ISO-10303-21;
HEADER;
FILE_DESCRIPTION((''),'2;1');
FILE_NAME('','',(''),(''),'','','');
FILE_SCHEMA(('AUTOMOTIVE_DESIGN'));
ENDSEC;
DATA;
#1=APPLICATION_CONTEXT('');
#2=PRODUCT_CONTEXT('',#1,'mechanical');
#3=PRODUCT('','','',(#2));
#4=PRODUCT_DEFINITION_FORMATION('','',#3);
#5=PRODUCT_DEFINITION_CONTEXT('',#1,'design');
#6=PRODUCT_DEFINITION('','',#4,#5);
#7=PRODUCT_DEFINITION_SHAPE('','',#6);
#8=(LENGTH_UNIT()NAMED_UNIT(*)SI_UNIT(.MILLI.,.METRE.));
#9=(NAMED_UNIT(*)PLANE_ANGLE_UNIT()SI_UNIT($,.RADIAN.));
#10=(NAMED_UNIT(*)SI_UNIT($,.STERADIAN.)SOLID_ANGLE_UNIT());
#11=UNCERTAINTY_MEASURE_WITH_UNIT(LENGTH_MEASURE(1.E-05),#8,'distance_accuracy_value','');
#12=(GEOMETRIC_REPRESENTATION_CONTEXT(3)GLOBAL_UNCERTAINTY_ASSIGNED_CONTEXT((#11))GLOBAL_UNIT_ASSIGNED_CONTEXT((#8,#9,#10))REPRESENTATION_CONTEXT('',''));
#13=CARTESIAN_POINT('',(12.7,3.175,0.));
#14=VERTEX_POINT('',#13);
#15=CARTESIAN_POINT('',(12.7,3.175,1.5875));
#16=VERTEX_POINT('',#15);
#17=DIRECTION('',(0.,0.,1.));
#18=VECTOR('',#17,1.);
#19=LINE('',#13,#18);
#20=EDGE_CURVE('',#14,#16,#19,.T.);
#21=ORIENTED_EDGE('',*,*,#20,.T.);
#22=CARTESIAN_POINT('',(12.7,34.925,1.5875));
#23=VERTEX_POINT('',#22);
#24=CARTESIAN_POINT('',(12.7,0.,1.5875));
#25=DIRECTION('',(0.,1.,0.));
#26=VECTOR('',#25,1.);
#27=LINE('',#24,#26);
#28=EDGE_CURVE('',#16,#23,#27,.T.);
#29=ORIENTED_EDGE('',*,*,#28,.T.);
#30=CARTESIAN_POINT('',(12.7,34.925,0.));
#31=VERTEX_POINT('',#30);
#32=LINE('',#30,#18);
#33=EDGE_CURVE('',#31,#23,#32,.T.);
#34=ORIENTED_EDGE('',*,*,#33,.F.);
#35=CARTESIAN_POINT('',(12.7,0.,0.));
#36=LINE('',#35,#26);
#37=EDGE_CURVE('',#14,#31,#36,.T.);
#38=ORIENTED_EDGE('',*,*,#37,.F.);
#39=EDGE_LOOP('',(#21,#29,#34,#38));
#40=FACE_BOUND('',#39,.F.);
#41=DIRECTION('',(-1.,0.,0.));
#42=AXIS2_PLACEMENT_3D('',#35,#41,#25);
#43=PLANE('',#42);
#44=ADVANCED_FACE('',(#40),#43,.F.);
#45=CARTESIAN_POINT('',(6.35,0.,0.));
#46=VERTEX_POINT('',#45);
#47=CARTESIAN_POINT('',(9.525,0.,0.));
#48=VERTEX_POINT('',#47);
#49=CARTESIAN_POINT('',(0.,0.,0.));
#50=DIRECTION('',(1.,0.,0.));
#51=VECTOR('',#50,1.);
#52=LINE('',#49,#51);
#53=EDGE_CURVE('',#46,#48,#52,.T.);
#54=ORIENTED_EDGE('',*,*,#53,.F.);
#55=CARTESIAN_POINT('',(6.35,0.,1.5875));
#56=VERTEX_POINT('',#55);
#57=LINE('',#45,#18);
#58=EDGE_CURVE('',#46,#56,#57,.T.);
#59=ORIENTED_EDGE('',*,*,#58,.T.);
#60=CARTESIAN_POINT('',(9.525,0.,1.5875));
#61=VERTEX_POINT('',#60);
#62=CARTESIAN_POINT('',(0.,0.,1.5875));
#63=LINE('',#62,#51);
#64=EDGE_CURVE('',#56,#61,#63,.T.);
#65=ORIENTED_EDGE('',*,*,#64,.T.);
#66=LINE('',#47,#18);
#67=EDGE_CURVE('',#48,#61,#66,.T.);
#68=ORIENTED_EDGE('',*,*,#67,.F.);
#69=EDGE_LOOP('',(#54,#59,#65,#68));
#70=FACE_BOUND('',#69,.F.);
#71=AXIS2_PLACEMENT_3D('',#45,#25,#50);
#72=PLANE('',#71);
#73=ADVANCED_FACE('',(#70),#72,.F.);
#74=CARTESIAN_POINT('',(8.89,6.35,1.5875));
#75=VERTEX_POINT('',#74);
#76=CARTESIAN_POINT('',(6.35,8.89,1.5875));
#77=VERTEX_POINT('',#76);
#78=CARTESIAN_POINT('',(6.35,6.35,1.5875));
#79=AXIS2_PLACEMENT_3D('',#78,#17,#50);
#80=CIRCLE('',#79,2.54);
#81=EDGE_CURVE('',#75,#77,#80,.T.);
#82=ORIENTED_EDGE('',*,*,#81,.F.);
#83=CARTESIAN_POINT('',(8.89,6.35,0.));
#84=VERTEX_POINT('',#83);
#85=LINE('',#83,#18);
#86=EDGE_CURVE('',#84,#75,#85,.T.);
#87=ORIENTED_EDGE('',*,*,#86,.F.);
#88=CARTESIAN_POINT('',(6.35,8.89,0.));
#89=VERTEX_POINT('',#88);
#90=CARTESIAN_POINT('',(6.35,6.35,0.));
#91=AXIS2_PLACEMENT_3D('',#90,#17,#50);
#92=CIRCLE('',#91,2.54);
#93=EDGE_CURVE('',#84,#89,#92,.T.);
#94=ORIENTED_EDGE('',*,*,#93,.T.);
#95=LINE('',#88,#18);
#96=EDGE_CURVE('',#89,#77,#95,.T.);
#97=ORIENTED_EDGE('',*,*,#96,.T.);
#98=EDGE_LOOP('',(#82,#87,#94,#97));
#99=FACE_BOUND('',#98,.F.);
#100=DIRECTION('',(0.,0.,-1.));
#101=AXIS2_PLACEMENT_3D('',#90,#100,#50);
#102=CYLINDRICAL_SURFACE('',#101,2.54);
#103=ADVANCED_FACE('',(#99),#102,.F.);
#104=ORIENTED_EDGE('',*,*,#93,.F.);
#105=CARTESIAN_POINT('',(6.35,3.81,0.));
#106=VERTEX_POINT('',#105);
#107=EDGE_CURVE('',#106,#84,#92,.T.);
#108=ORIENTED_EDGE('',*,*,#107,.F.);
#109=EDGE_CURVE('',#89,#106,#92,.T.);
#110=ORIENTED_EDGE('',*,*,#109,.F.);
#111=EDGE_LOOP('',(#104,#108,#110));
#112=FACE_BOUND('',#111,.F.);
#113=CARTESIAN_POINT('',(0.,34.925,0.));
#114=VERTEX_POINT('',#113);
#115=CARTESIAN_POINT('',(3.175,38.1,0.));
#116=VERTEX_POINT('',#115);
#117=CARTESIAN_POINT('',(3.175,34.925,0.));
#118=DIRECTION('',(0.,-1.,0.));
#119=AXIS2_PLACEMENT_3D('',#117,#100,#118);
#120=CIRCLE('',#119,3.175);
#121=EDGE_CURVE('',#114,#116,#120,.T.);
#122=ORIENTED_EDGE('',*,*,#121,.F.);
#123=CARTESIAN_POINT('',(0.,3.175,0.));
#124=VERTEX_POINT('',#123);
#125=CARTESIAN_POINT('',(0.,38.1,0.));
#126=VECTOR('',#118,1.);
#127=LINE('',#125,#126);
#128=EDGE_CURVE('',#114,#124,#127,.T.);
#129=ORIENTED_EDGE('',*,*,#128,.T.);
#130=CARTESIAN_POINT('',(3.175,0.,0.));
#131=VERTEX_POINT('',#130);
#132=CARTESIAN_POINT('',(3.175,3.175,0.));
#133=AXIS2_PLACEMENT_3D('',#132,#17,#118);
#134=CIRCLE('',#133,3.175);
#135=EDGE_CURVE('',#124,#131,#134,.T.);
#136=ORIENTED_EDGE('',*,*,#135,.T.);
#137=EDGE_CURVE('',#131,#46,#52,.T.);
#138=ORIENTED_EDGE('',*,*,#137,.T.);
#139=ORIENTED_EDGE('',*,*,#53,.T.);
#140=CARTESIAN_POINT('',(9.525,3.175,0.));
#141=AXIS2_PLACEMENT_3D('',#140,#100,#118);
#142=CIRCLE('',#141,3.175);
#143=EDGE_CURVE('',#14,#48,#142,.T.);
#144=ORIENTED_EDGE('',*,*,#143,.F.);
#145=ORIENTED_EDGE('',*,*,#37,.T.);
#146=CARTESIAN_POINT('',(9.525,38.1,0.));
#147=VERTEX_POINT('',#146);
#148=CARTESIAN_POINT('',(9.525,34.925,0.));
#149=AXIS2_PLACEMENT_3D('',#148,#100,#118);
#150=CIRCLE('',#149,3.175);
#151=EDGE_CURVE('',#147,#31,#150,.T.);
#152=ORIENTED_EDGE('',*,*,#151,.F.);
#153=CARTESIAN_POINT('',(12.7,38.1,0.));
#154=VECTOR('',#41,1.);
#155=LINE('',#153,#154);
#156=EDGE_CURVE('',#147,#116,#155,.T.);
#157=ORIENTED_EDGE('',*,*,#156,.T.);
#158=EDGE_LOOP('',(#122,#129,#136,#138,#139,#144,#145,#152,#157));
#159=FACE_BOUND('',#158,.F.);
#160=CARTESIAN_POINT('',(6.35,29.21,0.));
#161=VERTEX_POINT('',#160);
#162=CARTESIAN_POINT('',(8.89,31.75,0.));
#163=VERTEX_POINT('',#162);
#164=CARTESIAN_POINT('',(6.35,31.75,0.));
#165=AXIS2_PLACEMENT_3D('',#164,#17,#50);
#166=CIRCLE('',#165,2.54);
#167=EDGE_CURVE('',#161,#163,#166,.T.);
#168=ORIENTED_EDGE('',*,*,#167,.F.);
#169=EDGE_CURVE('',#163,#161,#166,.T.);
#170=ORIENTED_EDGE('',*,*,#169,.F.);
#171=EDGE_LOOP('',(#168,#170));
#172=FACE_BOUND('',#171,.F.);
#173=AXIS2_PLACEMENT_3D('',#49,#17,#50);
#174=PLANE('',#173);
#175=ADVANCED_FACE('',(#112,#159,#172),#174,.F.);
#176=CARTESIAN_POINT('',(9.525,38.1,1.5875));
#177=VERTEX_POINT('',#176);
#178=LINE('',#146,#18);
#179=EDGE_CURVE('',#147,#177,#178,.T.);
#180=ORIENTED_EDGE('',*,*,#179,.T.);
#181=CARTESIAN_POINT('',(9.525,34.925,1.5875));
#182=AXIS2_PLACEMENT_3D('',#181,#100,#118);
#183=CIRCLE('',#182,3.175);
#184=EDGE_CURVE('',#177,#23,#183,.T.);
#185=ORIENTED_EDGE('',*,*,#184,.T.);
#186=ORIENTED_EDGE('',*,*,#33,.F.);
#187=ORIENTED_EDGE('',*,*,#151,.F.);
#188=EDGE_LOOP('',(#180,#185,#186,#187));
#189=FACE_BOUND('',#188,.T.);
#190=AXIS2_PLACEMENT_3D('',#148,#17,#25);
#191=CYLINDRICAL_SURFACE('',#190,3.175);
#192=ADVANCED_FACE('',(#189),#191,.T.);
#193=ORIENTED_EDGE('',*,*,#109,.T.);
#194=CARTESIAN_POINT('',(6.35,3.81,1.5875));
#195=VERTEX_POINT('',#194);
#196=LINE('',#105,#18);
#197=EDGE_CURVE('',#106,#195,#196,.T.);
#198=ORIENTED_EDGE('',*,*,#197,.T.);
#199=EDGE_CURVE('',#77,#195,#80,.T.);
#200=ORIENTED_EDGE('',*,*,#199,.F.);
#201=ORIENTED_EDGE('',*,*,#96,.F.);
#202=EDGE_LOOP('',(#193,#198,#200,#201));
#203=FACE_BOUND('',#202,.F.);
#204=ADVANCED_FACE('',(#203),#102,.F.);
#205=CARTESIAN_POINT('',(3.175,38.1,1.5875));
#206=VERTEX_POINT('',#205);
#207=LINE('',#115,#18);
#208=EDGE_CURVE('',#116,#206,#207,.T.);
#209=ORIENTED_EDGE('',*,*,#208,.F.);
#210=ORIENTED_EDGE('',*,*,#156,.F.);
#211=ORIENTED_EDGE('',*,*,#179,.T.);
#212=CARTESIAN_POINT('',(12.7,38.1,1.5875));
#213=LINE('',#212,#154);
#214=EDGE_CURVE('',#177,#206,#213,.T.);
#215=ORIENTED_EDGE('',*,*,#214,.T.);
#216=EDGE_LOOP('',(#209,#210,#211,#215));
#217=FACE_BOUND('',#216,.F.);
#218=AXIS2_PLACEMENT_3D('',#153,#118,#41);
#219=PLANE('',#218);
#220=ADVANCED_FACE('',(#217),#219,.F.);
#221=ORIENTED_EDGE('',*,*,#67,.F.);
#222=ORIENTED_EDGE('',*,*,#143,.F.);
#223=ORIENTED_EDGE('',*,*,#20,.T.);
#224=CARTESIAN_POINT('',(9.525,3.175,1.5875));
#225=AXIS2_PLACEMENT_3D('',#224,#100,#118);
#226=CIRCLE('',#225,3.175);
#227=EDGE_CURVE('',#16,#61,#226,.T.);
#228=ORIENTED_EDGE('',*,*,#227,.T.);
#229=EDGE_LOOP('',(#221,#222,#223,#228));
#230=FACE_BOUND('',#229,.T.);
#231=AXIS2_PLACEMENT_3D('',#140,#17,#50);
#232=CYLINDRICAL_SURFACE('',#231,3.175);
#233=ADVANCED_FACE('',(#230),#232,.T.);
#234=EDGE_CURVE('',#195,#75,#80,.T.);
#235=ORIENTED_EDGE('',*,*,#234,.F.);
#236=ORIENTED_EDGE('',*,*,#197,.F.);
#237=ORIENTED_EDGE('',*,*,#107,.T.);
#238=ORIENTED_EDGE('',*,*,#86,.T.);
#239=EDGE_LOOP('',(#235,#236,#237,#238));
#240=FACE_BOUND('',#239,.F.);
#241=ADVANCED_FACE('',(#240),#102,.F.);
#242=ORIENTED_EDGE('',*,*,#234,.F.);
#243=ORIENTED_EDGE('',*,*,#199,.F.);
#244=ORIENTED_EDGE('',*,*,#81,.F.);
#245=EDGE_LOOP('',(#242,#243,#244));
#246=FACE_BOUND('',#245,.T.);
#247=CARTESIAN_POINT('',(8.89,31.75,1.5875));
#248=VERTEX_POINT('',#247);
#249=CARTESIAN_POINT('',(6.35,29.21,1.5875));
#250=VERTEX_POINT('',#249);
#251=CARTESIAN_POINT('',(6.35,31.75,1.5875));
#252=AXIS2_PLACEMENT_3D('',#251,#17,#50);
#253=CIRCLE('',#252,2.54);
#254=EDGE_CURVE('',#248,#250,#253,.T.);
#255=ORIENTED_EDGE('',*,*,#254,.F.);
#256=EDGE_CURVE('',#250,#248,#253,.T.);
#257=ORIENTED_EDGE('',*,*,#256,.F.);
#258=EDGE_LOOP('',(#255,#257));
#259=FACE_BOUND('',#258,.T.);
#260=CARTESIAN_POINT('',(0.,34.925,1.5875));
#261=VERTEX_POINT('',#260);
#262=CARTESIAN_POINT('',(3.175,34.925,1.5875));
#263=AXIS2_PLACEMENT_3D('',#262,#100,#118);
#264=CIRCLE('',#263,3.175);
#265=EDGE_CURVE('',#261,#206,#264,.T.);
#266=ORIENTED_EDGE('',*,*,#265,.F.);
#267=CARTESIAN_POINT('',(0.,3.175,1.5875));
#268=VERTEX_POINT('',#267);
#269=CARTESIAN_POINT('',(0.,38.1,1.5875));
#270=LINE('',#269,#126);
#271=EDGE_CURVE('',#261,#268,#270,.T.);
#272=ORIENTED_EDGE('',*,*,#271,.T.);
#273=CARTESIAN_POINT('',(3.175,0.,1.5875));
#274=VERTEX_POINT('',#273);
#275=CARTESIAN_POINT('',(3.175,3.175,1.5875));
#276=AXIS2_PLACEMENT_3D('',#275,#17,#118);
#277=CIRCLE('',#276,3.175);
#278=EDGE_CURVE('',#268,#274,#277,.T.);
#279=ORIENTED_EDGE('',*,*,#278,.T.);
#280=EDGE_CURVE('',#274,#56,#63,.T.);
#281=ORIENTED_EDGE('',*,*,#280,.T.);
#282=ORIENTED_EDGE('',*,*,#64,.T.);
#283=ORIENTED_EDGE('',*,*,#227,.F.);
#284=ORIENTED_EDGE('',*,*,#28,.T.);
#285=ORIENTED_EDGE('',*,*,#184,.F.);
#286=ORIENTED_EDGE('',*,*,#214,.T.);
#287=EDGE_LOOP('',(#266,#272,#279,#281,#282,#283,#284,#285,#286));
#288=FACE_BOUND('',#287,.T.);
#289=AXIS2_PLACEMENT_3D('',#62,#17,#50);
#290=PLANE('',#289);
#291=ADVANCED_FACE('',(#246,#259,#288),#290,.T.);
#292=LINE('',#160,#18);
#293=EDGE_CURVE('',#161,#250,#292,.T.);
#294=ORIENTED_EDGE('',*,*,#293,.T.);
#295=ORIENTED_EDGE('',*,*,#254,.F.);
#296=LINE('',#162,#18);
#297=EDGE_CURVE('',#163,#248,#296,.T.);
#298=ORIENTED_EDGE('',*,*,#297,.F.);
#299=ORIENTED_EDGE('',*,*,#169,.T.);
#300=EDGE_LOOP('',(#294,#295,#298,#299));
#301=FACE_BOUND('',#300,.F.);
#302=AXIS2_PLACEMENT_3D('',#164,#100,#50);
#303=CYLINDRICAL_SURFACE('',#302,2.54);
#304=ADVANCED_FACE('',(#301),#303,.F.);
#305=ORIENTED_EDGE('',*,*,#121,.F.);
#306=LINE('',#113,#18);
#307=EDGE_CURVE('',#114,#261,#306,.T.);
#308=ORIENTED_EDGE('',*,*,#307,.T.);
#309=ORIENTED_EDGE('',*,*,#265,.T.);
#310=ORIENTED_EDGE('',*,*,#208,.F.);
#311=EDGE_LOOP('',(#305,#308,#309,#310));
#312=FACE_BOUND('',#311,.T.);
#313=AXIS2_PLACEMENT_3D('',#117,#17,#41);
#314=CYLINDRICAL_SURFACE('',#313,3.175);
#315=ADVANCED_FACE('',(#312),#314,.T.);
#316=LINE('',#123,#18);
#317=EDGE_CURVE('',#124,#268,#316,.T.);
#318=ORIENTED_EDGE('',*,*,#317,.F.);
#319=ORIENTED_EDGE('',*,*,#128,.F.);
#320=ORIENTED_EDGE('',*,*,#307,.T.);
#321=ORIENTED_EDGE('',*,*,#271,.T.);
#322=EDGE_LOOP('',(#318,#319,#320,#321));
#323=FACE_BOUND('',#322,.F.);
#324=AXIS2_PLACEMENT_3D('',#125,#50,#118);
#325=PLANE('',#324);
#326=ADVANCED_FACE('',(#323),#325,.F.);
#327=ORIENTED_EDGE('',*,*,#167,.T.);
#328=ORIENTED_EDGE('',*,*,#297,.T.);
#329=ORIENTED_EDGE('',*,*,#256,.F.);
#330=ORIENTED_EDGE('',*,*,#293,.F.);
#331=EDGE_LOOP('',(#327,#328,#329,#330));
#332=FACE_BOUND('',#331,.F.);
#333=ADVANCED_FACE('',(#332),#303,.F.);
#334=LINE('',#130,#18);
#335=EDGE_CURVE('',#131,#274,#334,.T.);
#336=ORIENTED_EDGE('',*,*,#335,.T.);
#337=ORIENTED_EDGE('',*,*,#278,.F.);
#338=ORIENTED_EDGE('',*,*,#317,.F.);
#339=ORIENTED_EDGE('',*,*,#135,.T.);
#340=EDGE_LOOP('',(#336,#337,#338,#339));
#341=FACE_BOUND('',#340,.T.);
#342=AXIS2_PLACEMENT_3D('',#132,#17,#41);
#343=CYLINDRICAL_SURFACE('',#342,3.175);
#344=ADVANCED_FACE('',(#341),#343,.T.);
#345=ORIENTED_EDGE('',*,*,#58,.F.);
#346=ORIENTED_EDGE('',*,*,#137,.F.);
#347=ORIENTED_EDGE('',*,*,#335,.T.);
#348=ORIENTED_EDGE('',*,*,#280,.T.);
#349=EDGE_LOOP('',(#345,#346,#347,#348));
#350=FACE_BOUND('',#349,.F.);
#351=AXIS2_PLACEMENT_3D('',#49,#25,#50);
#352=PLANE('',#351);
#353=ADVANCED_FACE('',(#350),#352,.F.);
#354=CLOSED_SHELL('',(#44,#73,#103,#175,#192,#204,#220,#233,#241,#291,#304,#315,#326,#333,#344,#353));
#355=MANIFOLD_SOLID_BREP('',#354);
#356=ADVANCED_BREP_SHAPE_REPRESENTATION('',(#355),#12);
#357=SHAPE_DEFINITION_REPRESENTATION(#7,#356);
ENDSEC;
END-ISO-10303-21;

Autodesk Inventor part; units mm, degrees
ref_plane "YZ Plane" through (0, 0, 0) normal (1, 0, 0) x (0, 1, 0)
ref_plane "XZ Plane" through (0, 0, 0) normal (0, 1, 0) x (-1, 0, 0)
ref_plane "XY Plane" through (0, 0, 0) normal (0, 0, 1) x (1, 0, 0)
sketch "Sketch1" plane through (0, 0, 0) normal (0, 0, 1) x (1, 0, 0)
  line L0 (0, 0) -> (12.7, 0)
  line L1 (12.7, 0) -> (12.7, 38.1)
  line L2 (12.7, 38.1) -> (0, 38.1)
  line L3 (0, 38.1) -> (0, 0)
  line L4 (6.35, 0) -> (6.35, 6.35)
  line L5 (6.35, 6.35) -> (6.35, 31.75)
  circle A0 centre (6.35, 31.75) radius 2.54
  circle A1 centre (6.35, 6.35) radius 2.54
  dimension "d0" = 38.1
  dimension "d1" = 12.7
  dimension "d2" = 6.35
  dimension "d3" = 25.4
  dimension "d4" = 5.08
  dimension "d5" = 5.08
extrude "Extrusion1" add sketch "Sketch1" along normal blind 1.5875
fillet "Fillet1" radius 3.175 4 edges at (12.7, 0, 0.7937) (0, 0, 0.7937) (12.7, 38.1, 0.7937) (0, 38.1, 0.7937)
properties part number "polySpacer1"
